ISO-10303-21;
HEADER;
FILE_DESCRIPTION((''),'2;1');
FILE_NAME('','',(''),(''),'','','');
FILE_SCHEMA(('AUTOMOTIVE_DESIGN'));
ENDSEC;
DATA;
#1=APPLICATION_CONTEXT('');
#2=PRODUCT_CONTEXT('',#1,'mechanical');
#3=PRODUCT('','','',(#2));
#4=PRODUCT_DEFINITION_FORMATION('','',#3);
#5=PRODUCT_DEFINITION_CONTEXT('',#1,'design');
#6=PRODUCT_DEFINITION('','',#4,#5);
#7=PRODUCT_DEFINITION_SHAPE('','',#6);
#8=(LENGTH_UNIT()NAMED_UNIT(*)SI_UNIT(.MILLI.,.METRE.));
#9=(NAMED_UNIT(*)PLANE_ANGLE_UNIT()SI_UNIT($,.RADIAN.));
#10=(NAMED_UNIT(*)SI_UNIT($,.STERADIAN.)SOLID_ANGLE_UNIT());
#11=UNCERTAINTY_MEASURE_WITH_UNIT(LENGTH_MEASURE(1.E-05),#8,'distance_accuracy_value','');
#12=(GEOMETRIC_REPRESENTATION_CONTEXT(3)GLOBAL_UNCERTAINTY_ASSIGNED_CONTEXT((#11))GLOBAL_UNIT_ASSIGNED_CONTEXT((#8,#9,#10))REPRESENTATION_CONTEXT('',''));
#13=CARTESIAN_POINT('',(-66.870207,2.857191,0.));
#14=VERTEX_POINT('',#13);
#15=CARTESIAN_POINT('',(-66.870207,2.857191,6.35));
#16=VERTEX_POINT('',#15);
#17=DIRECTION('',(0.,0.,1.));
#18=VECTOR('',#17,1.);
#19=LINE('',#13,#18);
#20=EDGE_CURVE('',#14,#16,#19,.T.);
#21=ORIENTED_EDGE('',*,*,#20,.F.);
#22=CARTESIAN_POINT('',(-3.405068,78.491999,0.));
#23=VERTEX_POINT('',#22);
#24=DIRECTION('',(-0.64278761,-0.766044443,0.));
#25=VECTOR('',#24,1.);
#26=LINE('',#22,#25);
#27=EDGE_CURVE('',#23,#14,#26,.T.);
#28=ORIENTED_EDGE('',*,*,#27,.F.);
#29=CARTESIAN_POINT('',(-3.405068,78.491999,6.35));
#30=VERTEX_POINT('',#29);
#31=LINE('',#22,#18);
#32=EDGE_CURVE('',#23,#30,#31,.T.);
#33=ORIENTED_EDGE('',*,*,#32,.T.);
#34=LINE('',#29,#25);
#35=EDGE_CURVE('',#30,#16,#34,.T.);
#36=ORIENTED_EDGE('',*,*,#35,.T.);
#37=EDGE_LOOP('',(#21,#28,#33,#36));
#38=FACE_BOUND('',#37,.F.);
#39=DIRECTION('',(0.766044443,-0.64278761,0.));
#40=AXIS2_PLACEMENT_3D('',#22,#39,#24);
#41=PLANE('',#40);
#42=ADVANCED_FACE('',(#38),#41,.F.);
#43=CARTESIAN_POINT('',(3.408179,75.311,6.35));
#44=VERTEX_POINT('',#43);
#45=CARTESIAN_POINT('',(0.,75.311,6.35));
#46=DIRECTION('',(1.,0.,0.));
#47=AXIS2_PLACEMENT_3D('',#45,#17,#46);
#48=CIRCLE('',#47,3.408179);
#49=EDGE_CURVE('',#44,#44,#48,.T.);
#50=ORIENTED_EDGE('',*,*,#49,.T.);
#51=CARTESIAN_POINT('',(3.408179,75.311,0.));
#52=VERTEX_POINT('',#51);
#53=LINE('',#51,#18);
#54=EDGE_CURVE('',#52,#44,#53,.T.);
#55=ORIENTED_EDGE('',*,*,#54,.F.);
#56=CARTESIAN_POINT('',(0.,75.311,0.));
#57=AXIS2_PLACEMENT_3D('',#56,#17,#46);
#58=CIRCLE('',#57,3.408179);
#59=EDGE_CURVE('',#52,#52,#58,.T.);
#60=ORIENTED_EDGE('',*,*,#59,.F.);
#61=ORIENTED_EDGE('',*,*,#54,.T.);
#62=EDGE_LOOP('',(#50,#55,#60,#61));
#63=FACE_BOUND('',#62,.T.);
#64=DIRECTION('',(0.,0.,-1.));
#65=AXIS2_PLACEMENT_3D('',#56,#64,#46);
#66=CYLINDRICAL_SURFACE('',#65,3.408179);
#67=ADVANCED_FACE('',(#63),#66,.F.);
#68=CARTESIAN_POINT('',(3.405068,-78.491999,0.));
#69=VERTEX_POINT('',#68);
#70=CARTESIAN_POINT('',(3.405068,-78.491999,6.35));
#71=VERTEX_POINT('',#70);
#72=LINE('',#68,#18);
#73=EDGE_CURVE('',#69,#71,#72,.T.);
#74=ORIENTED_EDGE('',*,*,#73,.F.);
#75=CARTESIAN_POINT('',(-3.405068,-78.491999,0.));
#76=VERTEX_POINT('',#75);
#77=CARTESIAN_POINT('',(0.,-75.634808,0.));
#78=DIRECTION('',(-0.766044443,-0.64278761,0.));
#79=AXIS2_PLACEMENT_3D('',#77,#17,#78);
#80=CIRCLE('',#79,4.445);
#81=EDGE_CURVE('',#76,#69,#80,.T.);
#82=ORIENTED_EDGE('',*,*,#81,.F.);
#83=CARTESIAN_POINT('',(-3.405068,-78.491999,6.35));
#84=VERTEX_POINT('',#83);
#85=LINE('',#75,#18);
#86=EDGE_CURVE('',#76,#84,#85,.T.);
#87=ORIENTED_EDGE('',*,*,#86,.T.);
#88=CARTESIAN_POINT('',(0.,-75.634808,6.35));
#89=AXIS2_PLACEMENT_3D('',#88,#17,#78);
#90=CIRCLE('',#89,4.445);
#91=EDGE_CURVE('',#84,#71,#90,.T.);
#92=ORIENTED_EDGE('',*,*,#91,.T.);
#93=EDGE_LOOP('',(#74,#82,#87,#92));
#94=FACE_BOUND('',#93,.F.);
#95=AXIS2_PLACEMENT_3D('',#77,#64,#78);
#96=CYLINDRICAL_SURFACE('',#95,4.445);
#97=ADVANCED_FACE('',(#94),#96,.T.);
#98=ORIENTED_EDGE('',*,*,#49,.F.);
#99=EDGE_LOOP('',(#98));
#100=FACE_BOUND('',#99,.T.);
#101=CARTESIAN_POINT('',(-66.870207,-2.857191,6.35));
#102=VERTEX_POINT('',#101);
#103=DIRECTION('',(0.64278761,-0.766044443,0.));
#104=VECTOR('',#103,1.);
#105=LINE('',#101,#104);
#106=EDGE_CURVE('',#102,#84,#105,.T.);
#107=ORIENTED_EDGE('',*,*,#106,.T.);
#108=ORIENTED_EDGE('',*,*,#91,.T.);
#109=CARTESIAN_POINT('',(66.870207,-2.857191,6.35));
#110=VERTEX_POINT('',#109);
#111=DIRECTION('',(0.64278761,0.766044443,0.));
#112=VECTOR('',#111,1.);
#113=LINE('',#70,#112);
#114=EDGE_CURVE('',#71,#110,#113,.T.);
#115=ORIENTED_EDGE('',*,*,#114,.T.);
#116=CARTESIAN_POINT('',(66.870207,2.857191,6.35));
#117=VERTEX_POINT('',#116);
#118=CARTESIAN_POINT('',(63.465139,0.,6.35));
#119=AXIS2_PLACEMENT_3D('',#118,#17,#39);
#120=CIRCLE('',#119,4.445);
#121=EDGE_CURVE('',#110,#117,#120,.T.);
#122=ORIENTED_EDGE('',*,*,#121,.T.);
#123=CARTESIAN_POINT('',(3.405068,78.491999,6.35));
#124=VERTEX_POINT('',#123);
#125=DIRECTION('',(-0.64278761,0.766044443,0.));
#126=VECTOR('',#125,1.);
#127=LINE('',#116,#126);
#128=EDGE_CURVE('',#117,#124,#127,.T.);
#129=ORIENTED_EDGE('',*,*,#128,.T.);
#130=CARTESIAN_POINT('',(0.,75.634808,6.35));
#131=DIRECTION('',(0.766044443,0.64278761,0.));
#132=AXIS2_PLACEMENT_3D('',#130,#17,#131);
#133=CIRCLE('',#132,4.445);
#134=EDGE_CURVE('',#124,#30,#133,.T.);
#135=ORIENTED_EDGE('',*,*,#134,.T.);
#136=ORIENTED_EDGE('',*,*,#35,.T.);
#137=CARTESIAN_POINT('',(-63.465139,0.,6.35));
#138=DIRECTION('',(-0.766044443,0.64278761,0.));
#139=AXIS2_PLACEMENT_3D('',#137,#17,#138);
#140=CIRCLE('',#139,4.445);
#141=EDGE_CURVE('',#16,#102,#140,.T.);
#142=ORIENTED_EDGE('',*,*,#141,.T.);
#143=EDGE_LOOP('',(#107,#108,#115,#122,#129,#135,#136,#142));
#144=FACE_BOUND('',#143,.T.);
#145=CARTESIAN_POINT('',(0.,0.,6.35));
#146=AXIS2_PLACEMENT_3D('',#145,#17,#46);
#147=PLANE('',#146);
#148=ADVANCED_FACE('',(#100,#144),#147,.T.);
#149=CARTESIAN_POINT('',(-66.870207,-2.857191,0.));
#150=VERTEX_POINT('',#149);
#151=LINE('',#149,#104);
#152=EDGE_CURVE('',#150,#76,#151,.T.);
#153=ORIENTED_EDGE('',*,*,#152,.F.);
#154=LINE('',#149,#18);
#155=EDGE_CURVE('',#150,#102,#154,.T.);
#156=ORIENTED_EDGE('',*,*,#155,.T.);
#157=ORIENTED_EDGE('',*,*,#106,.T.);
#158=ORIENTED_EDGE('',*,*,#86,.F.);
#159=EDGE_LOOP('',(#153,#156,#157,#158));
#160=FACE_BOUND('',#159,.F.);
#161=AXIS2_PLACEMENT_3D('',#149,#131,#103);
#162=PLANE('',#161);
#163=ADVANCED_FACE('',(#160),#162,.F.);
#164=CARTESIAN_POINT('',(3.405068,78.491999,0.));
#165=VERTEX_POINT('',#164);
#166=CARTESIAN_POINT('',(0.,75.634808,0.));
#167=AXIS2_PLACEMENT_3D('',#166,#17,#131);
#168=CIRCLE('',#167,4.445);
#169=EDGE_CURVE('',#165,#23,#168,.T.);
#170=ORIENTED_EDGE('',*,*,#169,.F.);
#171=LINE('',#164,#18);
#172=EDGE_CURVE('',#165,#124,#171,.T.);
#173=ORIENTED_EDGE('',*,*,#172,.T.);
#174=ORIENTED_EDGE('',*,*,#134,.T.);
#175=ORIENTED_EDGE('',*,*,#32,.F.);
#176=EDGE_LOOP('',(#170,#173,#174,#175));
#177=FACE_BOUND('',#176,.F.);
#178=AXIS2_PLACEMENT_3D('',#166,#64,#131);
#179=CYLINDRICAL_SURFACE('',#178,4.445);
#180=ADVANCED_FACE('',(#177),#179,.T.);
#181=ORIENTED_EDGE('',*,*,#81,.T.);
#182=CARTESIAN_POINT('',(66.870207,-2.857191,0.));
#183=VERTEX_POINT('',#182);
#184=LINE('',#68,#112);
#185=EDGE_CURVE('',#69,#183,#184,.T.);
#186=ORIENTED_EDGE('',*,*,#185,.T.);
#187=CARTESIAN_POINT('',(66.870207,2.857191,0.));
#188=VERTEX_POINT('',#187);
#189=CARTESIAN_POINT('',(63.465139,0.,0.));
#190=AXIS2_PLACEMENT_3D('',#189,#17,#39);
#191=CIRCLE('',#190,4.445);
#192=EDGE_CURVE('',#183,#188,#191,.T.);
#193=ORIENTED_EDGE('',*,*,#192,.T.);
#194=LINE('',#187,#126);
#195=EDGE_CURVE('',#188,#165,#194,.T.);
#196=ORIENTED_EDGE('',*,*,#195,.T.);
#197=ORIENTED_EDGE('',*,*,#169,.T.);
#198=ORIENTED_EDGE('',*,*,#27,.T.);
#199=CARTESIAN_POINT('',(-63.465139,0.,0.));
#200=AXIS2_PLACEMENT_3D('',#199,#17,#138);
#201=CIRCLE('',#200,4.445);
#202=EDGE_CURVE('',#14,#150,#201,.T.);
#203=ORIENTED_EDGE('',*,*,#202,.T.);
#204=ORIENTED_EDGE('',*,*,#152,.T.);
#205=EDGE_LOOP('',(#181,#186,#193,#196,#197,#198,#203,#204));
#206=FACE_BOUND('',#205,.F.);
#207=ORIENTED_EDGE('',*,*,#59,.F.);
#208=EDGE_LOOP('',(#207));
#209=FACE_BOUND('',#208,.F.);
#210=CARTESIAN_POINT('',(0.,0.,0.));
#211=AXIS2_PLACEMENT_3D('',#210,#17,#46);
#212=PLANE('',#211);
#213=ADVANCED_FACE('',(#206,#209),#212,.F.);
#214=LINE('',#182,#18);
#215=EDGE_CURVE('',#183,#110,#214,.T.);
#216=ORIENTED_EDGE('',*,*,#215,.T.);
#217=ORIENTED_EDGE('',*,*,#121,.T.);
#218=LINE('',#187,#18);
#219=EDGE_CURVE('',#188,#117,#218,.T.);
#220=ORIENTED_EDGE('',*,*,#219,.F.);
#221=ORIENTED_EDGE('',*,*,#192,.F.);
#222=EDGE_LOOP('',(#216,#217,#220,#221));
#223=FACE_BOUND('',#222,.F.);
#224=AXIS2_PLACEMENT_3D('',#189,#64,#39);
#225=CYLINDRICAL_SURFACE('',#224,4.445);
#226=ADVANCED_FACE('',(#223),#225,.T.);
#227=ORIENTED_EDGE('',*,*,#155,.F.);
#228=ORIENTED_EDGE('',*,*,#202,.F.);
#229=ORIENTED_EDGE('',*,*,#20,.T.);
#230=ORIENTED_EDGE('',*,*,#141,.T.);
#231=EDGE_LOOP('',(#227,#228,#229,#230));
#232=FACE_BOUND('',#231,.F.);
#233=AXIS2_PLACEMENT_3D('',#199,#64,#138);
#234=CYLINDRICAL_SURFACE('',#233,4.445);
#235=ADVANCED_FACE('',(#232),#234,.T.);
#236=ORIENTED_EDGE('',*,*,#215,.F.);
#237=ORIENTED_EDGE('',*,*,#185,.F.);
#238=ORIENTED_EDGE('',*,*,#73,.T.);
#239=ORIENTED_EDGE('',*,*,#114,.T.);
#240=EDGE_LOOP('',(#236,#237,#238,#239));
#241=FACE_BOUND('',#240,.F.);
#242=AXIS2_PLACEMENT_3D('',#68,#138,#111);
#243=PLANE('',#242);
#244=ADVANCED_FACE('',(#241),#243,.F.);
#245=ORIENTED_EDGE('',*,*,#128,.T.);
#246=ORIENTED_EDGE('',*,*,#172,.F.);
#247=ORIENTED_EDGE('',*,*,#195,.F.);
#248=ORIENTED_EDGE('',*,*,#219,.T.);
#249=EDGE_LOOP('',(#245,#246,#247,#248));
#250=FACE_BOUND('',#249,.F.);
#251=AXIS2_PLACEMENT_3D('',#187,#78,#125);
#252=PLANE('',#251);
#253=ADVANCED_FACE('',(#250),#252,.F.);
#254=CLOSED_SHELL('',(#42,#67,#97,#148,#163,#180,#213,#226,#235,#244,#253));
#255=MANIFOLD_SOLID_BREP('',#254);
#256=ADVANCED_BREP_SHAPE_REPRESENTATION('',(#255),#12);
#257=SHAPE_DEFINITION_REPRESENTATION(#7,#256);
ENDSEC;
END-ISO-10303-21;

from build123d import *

# Parameters (mm, degrees)
F0_R     = 3.40817912
F1_DEPTH = 6.35


# Not quite as in the source:
# - a length typed as a fraction of an inch, garbled in the dataset ("3 / 203.2 mm" for 3/8 in), is restored


with BuildPart() as f1:
    # F0 (on Top) → F1 (new body)
    with BuildSketch(Plane.XY):
        with BuildLine():
            ThreePointArc((3.4050675497, 78.4919985147), (0, 80.0798075896), (-3.4050675497, 78.4919985147))
            Line((-3.4050675497, 78.4919985147), (-66.8702067023, 2.8571909251))
            ThreePointArc((-66.8702067023, 2.8571909251), (-67.9101391526, 0), (-66.8702067023, -2.8571909251))
            Line((-66.8702067023, -2.8571909251), (-3.4050675497, -78.4919985147))
            ThreePointArc((-3.4050675497, -78.4919985147), (0, -80.0798075896), (3.4050675497, -78.4919985147))
            Line((3.4050675497, -78.4919985147), (66.8702067023, -2.8571909251))
            ThreePointArc((66.8702067023, -2.8571909251), (67.9101391526, 0), (66.8702067023, 2.8571909251))
            Line((66.8702067023, 2.8571909251), (3.4050675497, 78.4919985147))
        make_face()
        with Locations((0, 75.311)):
            Circle(F0_R, mode=Mode.SUBTRACT)
    extrude(amount=F1_DEPTH)


solid = f1.part
